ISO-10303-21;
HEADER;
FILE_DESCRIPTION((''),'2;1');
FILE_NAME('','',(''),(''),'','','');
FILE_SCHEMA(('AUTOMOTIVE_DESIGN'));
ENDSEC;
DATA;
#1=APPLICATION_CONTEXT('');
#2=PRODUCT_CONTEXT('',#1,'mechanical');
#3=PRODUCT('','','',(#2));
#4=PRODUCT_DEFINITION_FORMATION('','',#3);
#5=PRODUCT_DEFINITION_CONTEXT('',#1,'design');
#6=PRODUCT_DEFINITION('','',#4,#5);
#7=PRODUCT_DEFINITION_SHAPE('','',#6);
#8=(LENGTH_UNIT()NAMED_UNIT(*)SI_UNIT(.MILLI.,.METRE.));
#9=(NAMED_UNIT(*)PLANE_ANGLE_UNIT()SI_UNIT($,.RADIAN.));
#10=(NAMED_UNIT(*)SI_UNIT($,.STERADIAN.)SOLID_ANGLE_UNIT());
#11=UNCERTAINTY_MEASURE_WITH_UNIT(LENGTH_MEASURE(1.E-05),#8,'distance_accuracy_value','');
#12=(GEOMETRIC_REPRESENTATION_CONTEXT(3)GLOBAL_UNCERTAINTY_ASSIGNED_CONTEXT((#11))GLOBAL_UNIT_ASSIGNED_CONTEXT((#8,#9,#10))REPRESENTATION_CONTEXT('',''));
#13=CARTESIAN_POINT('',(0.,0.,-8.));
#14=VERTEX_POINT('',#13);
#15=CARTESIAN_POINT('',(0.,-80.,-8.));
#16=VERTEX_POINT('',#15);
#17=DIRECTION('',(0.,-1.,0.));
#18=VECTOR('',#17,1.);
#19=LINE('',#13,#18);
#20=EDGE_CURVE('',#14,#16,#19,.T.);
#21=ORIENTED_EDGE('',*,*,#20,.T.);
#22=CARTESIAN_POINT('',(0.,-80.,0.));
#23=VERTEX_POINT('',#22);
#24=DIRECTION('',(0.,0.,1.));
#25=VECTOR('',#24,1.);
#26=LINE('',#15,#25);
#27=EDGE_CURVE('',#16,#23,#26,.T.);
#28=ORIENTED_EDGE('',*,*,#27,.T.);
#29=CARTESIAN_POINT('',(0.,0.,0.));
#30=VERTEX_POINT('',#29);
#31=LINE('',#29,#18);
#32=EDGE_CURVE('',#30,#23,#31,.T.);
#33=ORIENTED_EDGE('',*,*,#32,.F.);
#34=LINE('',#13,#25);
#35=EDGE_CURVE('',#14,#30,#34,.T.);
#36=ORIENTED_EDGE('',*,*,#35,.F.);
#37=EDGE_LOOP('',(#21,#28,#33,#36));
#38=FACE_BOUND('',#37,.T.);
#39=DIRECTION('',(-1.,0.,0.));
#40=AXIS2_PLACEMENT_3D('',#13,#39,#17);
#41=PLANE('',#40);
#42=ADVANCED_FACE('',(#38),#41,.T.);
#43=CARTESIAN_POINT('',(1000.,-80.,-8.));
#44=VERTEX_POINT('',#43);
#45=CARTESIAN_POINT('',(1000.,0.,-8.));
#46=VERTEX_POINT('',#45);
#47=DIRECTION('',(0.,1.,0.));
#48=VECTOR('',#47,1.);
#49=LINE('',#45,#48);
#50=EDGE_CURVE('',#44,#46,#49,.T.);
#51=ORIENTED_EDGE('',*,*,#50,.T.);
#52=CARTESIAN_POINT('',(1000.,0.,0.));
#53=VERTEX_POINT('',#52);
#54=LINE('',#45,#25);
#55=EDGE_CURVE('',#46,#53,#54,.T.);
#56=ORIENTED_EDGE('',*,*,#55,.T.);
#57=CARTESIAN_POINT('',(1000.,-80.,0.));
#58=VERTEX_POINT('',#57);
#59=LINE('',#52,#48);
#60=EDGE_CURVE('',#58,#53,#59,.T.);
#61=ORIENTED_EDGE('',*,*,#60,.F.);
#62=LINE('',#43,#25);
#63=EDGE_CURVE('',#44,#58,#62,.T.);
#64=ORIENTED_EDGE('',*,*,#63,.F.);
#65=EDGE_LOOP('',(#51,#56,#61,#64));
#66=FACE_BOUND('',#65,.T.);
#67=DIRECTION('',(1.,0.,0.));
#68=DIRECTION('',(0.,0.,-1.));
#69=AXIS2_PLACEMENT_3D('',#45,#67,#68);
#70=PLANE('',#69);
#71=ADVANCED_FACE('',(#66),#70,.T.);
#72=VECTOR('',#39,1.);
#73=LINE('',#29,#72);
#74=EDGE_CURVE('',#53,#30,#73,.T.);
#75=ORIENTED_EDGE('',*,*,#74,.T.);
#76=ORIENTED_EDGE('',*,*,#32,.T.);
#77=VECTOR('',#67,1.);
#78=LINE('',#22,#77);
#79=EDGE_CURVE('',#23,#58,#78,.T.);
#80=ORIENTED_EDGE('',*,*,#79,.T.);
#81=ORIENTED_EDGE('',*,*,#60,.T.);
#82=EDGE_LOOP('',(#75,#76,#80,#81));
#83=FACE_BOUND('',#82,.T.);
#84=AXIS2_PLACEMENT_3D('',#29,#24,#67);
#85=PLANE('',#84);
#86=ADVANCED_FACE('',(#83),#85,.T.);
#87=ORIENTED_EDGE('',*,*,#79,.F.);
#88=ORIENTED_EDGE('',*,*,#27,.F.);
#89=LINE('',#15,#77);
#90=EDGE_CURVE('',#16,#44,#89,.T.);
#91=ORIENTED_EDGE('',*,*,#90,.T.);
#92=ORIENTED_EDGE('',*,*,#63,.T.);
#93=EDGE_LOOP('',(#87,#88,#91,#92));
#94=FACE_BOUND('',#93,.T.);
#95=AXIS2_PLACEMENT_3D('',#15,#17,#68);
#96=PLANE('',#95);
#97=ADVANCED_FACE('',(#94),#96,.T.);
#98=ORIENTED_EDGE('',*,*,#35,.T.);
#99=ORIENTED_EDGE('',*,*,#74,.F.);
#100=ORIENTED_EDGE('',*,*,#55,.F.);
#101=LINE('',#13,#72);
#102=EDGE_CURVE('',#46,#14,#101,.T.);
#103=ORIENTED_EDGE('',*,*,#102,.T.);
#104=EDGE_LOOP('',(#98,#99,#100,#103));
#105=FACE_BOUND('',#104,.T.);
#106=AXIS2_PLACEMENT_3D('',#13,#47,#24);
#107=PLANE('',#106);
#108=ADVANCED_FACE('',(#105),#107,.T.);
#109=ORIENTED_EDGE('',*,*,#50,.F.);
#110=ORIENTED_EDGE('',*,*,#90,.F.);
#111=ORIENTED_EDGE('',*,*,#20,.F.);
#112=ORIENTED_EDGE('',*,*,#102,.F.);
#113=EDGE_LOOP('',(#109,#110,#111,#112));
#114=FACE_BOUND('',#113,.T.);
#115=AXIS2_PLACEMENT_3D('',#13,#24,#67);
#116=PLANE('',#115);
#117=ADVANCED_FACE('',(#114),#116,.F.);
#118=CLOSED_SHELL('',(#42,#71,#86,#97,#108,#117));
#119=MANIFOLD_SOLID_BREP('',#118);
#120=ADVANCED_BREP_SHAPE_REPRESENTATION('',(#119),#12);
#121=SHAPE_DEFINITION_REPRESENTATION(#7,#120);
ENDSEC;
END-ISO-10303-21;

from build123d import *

# Parameters (mm, degrees)
IZIM1_W            = 1000
IZIM1_H            = 80
TABAN_FLAN_1_DEPTH = 8


# Sheet-metal steps are written as plain solids
with BuildPart() as part:
    # Çizim1 → Taban-Flanş1 (new body)
    with BuildSketch(Plane.XY):
        with Locations((500, -40)):
            Rectangle(IZIM1_W, IZIM1_H)
    extrude(amount=-TABAN_FLAN_1_DEPTH)


solid = part.part
